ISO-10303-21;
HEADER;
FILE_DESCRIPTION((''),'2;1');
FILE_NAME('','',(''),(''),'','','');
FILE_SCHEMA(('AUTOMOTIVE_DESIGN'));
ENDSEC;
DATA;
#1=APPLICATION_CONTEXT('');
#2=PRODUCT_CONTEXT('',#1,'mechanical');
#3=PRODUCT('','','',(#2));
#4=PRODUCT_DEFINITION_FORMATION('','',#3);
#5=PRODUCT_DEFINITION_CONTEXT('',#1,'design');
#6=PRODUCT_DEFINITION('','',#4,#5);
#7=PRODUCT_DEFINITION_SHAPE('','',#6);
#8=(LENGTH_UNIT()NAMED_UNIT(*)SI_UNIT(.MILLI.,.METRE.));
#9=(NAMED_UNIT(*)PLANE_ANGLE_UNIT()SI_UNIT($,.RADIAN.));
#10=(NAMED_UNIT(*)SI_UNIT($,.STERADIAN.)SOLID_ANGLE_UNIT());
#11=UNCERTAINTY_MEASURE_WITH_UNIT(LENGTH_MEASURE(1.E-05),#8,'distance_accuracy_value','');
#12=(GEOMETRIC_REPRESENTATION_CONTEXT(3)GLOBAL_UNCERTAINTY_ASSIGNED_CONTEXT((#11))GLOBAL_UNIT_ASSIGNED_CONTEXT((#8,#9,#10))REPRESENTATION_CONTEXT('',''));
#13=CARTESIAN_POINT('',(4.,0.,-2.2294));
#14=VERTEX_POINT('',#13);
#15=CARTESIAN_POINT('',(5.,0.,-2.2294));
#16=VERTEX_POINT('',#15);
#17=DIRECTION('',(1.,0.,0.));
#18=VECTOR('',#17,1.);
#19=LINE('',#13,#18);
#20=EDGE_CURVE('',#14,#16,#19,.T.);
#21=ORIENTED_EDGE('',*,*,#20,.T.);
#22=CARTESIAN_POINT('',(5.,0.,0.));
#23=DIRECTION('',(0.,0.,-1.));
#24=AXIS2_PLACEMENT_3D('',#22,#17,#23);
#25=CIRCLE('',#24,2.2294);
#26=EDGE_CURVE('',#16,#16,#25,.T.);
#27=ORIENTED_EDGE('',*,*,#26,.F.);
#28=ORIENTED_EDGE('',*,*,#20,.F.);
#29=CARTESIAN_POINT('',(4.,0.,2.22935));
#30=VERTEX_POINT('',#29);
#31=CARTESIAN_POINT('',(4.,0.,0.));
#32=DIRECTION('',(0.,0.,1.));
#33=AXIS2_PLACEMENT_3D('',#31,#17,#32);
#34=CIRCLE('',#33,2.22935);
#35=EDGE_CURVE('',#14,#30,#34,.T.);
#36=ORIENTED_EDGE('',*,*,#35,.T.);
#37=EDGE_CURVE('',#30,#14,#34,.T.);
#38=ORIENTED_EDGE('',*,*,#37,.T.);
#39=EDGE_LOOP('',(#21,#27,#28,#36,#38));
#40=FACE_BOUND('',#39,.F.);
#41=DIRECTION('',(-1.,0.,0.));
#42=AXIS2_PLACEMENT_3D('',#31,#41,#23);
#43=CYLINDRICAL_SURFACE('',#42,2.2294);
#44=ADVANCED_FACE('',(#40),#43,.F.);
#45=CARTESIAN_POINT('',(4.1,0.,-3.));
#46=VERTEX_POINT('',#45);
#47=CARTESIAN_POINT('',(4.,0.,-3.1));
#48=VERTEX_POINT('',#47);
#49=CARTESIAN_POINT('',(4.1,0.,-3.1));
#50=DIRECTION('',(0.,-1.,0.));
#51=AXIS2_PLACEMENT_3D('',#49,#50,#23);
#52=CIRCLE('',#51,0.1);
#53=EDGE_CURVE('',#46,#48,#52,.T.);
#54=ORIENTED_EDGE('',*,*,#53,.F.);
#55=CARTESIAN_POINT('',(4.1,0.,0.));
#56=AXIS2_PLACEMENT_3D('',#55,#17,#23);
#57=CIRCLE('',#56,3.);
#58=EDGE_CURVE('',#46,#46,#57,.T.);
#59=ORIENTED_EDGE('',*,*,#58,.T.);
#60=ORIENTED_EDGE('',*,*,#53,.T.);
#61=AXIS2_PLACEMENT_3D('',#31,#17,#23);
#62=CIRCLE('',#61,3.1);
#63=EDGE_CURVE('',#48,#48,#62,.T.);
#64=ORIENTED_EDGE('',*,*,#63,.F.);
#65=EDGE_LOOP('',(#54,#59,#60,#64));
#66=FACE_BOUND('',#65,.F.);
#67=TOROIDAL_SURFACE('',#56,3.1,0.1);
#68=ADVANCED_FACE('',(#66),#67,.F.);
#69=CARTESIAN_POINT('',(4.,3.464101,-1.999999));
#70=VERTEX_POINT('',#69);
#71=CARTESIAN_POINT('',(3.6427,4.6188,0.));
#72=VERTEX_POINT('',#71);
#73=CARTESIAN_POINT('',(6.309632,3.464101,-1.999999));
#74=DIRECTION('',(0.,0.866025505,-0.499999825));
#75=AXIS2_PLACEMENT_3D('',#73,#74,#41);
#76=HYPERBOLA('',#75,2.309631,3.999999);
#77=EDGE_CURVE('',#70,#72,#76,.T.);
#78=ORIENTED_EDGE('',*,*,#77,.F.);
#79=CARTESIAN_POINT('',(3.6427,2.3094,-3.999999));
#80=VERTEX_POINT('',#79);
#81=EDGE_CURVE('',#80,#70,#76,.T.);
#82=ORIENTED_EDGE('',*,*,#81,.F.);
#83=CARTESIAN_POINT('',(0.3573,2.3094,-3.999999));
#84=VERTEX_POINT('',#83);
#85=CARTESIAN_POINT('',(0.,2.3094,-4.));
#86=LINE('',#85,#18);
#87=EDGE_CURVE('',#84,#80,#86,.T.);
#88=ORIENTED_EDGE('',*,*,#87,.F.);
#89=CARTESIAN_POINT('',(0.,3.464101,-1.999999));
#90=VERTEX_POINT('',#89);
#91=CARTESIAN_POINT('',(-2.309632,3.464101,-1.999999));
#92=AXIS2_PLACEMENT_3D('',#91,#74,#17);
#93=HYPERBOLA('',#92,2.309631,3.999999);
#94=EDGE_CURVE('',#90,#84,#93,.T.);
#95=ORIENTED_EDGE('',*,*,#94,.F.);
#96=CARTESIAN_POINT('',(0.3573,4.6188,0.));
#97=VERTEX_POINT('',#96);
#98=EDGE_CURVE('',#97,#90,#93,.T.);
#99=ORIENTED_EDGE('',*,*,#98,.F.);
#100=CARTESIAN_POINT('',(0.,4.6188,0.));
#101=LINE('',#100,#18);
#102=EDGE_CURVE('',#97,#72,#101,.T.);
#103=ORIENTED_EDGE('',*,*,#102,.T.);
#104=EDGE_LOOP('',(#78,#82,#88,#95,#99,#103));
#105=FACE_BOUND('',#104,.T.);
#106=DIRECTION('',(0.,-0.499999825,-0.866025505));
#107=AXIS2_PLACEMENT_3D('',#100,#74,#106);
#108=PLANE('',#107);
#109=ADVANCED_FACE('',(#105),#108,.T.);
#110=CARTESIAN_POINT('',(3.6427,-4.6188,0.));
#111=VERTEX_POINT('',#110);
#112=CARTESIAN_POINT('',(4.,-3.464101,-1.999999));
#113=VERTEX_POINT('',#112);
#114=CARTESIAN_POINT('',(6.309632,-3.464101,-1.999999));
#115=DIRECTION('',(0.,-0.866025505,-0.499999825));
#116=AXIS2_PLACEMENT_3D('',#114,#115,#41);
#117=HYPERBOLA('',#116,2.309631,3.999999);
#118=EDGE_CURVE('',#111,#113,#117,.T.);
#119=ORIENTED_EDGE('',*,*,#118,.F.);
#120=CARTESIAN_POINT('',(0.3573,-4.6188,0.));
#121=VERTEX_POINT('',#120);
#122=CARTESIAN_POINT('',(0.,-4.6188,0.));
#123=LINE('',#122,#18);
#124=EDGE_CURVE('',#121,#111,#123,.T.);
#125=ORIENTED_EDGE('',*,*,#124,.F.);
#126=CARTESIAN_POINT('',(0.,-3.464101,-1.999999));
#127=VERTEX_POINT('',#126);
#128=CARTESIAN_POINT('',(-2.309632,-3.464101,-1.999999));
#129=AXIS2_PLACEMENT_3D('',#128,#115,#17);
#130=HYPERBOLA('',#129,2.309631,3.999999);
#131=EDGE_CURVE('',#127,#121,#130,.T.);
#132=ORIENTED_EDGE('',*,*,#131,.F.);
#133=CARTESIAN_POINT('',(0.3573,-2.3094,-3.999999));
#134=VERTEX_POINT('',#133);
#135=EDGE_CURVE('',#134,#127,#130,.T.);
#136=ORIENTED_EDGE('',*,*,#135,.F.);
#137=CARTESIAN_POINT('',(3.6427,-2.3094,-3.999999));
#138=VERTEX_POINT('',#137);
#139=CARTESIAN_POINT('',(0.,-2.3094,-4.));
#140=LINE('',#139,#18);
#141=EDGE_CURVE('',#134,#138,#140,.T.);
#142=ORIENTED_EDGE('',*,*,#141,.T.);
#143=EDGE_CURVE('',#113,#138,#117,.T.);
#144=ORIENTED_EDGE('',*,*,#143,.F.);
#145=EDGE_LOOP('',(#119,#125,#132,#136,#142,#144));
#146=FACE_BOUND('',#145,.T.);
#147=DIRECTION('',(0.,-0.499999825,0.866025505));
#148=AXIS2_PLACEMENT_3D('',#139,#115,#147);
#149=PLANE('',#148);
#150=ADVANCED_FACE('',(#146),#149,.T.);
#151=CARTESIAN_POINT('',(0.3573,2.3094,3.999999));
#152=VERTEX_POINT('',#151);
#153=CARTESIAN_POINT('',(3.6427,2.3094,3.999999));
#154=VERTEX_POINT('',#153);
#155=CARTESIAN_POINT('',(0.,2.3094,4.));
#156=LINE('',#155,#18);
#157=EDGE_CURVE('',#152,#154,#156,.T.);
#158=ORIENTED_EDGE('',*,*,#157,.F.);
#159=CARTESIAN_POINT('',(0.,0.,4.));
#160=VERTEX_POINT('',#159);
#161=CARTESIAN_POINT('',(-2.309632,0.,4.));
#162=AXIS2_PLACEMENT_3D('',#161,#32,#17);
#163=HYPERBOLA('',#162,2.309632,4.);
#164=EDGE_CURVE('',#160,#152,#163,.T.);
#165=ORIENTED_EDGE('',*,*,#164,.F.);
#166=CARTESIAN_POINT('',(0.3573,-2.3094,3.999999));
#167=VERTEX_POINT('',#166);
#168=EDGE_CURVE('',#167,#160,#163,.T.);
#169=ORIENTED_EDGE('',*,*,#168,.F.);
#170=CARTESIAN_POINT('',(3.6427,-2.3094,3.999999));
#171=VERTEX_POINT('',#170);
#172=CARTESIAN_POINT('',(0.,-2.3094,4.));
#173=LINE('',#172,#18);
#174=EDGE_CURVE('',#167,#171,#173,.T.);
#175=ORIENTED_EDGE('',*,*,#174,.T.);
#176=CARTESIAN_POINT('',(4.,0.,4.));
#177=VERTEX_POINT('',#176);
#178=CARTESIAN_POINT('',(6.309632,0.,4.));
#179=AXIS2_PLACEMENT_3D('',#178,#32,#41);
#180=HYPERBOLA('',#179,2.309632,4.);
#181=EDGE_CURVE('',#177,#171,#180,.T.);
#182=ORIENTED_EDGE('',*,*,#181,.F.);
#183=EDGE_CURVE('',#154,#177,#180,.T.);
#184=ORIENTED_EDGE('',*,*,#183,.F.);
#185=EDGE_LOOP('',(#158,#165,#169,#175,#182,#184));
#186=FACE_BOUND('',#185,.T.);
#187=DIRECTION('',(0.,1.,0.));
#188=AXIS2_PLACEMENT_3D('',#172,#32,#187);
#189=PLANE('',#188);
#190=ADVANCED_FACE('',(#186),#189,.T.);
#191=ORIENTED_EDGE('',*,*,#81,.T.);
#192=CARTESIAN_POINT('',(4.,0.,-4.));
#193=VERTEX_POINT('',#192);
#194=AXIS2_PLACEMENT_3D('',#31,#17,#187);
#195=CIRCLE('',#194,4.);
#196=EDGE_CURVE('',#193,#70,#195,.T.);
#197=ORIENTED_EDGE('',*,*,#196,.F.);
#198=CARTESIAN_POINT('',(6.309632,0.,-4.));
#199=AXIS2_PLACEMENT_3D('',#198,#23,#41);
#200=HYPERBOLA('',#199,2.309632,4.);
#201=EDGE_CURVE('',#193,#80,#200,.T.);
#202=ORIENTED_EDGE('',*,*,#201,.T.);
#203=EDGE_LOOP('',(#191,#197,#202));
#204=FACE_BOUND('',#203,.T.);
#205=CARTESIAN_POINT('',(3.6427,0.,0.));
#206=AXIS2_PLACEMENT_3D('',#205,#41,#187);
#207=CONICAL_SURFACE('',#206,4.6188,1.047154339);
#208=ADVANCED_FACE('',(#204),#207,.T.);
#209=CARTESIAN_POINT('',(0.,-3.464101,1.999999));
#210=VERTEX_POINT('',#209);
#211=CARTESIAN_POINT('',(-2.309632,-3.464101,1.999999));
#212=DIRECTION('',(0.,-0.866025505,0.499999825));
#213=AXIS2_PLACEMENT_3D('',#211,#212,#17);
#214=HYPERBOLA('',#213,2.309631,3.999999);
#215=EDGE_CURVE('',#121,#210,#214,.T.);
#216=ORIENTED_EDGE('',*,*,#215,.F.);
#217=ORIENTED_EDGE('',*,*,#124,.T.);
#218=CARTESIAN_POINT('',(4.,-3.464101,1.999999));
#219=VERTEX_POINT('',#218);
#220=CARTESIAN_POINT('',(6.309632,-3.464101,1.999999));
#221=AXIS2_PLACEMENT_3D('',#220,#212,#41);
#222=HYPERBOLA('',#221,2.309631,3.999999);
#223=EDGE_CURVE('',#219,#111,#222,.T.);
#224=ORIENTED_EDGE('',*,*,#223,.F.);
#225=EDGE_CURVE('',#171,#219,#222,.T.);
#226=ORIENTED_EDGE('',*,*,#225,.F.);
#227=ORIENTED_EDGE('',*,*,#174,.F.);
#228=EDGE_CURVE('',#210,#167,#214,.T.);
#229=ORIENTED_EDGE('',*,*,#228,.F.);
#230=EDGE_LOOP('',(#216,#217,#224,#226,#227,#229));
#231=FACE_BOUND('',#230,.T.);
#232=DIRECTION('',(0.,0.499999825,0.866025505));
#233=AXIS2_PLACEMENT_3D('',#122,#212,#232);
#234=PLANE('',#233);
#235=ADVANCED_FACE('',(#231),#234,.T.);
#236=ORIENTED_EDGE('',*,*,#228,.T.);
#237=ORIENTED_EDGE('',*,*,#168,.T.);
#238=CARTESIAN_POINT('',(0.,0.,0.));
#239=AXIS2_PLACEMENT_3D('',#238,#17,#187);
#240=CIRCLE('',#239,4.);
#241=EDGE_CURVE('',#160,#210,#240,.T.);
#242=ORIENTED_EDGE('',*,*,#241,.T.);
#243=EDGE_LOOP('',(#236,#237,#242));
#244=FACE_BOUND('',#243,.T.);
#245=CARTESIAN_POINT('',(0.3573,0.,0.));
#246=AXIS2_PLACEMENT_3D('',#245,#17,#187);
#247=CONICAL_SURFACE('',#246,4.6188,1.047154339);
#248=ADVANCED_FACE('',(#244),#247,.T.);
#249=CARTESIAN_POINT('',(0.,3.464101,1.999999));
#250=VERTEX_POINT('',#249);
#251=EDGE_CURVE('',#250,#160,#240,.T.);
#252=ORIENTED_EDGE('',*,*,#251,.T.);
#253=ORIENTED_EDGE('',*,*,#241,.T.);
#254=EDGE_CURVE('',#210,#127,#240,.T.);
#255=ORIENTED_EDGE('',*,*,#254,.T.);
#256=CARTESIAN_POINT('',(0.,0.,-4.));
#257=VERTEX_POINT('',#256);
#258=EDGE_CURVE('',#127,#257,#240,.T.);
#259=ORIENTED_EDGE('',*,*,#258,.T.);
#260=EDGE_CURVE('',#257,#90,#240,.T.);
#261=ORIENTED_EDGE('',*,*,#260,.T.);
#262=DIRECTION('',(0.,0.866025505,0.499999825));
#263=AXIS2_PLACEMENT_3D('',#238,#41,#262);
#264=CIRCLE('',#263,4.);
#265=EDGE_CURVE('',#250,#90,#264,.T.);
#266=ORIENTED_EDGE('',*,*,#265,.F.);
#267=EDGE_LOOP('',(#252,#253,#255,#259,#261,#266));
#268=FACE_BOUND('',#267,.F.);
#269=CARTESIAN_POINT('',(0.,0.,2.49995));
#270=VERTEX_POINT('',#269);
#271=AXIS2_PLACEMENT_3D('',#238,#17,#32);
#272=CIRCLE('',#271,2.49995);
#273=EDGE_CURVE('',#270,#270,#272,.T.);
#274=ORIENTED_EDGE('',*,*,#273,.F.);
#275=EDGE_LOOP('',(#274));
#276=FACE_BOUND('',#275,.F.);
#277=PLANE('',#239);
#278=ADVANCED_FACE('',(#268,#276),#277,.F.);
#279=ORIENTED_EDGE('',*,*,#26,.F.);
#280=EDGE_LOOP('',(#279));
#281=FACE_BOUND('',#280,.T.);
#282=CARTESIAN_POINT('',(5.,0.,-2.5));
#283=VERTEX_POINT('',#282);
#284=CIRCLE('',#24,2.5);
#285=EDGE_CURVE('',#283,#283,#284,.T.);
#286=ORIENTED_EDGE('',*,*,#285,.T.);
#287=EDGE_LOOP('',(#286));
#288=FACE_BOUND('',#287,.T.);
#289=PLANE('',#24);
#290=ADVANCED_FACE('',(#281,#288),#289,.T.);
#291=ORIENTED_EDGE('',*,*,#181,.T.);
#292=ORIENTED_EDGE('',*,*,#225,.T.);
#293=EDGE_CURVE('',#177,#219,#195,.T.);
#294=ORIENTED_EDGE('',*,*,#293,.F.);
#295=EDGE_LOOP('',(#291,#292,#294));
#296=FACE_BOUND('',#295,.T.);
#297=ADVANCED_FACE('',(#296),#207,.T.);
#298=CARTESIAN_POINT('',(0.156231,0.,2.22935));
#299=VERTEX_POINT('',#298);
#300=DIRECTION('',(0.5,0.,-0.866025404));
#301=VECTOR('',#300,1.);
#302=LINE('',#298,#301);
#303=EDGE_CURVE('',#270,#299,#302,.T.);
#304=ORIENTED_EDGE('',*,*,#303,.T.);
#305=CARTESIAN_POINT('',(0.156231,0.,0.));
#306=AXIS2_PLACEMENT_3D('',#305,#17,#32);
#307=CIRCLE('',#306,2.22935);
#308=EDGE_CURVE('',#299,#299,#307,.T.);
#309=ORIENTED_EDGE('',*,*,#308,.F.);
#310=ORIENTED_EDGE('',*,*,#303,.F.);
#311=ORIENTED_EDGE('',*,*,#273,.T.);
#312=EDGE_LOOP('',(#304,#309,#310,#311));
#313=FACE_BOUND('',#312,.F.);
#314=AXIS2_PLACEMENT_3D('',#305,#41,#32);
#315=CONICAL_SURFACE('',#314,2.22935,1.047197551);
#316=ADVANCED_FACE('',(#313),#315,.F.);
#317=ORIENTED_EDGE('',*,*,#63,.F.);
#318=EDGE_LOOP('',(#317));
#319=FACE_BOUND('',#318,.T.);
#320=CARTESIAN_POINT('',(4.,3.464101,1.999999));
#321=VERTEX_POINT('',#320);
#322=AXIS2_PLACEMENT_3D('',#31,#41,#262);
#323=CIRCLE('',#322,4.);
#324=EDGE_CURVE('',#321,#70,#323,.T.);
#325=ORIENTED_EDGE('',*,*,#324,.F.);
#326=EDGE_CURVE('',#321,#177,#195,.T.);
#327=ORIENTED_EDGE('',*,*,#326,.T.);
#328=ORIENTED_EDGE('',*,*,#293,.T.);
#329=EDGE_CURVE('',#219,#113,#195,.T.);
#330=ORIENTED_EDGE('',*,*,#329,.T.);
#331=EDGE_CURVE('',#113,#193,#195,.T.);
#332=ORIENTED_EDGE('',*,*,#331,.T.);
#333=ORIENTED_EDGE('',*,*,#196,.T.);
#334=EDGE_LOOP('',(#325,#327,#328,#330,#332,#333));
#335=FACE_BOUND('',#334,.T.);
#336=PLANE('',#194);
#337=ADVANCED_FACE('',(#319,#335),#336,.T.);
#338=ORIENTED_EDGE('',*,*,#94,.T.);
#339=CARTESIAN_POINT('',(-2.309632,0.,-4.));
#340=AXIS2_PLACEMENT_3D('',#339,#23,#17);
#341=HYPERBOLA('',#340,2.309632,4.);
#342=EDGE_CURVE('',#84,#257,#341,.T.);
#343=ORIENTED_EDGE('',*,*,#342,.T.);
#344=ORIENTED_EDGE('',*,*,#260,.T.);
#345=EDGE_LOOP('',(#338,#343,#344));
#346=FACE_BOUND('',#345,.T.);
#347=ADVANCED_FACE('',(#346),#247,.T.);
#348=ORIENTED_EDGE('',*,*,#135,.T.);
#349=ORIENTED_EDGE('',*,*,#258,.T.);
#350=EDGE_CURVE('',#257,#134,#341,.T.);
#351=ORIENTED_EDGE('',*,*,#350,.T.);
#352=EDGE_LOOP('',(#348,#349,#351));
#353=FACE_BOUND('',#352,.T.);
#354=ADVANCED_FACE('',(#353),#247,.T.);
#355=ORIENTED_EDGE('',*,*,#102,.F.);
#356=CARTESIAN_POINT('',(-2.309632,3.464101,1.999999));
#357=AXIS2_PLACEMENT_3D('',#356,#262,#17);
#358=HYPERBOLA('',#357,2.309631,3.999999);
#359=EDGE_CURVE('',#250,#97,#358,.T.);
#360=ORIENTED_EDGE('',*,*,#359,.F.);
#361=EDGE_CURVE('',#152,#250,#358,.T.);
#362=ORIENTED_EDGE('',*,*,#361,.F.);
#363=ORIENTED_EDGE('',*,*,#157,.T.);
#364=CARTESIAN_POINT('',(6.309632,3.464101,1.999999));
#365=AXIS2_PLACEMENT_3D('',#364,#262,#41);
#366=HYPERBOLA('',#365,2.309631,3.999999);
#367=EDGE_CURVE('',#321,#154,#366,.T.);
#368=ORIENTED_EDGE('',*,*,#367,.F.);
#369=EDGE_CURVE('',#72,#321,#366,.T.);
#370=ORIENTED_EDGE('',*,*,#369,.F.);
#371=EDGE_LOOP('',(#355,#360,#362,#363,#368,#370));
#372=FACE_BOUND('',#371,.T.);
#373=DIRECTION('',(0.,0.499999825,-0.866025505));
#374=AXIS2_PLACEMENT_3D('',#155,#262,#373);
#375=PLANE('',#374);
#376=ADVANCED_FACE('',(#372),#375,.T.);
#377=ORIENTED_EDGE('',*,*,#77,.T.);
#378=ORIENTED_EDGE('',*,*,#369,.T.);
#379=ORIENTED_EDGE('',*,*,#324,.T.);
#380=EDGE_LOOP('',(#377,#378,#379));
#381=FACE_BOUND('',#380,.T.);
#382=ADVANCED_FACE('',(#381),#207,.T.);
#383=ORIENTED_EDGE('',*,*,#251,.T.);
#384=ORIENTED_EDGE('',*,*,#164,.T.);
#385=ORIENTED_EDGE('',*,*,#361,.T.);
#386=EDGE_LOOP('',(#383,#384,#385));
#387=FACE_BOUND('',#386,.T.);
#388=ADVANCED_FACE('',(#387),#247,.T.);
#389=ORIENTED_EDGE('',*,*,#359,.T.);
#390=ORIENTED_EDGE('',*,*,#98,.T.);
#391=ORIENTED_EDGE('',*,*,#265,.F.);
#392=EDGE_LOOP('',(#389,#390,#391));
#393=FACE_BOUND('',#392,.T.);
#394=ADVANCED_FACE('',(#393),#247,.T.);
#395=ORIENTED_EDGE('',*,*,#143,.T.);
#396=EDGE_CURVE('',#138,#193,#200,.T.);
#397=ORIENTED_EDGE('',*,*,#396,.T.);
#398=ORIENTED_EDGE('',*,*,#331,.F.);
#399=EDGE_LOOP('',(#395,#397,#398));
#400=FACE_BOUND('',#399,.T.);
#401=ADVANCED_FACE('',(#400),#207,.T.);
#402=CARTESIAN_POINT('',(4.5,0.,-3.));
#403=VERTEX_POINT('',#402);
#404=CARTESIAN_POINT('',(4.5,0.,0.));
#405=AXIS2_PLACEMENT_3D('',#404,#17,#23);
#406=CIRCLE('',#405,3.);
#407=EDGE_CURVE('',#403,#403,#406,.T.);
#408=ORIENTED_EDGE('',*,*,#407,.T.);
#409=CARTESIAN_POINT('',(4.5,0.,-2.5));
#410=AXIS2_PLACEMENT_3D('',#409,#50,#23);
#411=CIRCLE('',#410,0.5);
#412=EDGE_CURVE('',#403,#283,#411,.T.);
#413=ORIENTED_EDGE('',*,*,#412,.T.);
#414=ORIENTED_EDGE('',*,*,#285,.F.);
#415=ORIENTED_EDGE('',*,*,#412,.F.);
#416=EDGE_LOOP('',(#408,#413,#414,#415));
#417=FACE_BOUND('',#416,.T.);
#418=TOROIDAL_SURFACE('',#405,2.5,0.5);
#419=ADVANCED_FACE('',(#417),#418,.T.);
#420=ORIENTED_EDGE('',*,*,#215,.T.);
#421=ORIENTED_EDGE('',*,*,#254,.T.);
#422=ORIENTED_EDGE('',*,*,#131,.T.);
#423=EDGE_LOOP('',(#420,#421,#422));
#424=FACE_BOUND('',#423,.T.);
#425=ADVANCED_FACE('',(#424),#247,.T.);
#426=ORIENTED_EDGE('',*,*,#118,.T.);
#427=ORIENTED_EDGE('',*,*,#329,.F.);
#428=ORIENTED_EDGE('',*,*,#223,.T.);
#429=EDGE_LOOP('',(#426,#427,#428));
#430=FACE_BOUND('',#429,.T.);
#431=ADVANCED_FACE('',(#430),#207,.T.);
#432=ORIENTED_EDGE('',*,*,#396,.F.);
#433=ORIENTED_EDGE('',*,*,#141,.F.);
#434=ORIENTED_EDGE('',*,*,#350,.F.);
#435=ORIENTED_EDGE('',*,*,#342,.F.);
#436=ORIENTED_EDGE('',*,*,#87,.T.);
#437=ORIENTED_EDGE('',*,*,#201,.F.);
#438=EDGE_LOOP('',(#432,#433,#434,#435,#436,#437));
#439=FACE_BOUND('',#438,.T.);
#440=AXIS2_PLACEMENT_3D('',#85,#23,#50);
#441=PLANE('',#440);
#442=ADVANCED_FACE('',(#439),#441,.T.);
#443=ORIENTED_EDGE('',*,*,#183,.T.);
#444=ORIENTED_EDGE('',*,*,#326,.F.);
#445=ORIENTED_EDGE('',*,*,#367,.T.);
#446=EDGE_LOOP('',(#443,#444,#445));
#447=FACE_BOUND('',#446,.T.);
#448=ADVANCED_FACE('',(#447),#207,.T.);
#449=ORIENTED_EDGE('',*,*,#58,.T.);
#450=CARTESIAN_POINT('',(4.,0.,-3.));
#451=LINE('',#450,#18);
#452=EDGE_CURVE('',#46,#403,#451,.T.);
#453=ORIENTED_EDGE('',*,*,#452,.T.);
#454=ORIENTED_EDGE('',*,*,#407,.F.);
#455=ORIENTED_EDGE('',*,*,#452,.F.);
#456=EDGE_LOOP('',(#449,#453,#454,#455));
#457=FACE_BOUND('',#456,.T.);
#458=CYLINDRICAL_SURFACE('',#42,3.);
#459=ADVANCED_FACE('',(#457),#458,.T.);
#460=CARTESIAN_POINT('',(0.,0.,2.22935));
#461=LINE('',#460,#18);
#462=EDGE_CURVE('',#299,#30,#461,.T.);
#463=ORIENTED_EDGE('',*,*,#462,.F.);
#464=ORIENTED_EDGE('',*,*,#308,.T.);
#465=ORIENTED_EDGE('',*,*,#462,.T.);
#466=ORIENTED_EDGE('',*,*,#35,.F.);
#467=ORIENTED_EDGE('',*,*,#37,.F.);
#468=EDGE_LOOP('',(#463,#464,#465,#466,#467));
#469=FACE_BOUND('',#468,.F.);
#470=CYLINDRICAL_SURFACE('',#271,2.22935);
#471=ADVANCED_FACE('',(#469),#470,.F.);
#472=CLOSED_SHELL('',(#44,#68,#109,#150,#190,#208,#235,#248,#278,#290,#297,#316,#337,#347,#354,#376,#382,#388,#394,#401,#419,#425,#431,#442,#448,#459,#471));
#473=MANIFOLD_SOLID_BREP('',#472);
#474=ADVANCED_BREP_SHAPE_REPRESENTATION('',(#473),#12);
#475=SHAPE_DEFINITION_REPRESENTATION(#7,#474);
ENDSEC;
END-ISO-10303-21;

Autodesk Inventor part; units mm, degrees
ref_plane "YZ Plane" through (0, 0, 0) normal (1, 0, 0) x (0, 1, 0)
sketch "Sketch1" plane through (0, 0, 0) normal (1, 0, 0) x (0, 1, 0)
  line L0 (4.6188, 0) -> (2.3094, -4)
  line L1 (2.3094, -4) -> (-2.3094, -4)
  line L2 (-2.3094, -4) -> (-4.6188, 0)
  line L3 (-4.6188, 0) -> (-2.3094, 4)
  line L4 (-2.3094, 4) -> (2.3094, 4)
  line L5 (2.3094, 4) -> (4.6188, 0)
  point P0 (0, 0)
  point P1 (0, 0)
  dimension "d0" = 9.2376
extrude "Body" add sketch "Sketch1" along normal blind 4
sketch "Sketch2" plane through (0, 0, 0) normal (-1, 0, 0) x (0, 0, 1)
  point P0 (0, 0)
hole "Thread" at (0, 0, 0) direction (1, 0, 0) diameter 4.4587 end through all thread size "M5x0.5" class "6H" standard "ISO Metric profile"
chamfer "Chamfer1" distance 0.2706 angle 30 1 edges at (0, 0, -2.2294) measured on face at (0, -2.921, 1.7555)
sketch "Sketch3" plane through (0, 0, 0) normal (0, 0, 1) x (1, 0, 0)
  line L0 (0, 4.6188) -> (4, 4.6188) projected
  line L1 (4, 2.3094) -> (4, 4.6188) projected
  line L2 (-0.6, 0) -> (3.6, 0) projected
  line L3 (3.6427, 4.6188) -> (4, 4)
  dimension "d3" = 8
  dimension "d4" = 30
revolve "Chamfer3" cut sketch "Sketch3" angle 360 about axis through (-10, 0, 0) along (1, 0, 0)
ref_plane "Work Plane1" through (12.8582, 0, 0) normal (0, 0.8660254, -0.5) x (-1, 0, 0)
ref_plane "Work Plane2" through (2, 0, 0) normal (1, 0, 0) x (0, 0, -1)
mirror "Mirror1" about plane through (2, 0, 0) normal (1, 0, 0) of "Chamfer3"
sketch "Sketch6" plane through (4, 0, 0) normal (1, 0, 0) x (0, 0, -1)
  circle A0 centre (0, 0) radius 2.2294 projected
  circle A1 centre (0, 0) radius 3
  dimension "d26" = 6
extrude "Extrusion2" add sketch "Sketch6" along normal blind 1
fillet "Fillet1" radius 0.5 1 edges at (5, 0, 3)
fillet "Fillet2" radius 0.1 1 edges at (4, 0, 3)
equation "\"d13\" = -0.5 * GD1 + 0.5 * NND"
equation "\"d21\" = -0.5 * GD1 + 0.5 * NND"
equation "\"d4\" = ANG2"
equation "\"ANG2\" = 30deg"
equation "\"NND\" = 3"
equation "\"KOH\" = 2.4"
equation "\"SW\" = 5.5"
equation "\"SW01\" = SW"
equation "\"GUL\" = 0.541266 * PTC"
equation "\"TOA\" = 30deg"
equation "\"PTC\" = 0.5"
equation "\"E0\" = 1.155 * SW"
equation "\"THREADDIA\" = 3"
equation "\"GAL\" = 0.541266 * PTC"
equation "\"GD1\" = 2.458734"
properties part number "M3 Nylon Nut" material "Stainless Steel"
